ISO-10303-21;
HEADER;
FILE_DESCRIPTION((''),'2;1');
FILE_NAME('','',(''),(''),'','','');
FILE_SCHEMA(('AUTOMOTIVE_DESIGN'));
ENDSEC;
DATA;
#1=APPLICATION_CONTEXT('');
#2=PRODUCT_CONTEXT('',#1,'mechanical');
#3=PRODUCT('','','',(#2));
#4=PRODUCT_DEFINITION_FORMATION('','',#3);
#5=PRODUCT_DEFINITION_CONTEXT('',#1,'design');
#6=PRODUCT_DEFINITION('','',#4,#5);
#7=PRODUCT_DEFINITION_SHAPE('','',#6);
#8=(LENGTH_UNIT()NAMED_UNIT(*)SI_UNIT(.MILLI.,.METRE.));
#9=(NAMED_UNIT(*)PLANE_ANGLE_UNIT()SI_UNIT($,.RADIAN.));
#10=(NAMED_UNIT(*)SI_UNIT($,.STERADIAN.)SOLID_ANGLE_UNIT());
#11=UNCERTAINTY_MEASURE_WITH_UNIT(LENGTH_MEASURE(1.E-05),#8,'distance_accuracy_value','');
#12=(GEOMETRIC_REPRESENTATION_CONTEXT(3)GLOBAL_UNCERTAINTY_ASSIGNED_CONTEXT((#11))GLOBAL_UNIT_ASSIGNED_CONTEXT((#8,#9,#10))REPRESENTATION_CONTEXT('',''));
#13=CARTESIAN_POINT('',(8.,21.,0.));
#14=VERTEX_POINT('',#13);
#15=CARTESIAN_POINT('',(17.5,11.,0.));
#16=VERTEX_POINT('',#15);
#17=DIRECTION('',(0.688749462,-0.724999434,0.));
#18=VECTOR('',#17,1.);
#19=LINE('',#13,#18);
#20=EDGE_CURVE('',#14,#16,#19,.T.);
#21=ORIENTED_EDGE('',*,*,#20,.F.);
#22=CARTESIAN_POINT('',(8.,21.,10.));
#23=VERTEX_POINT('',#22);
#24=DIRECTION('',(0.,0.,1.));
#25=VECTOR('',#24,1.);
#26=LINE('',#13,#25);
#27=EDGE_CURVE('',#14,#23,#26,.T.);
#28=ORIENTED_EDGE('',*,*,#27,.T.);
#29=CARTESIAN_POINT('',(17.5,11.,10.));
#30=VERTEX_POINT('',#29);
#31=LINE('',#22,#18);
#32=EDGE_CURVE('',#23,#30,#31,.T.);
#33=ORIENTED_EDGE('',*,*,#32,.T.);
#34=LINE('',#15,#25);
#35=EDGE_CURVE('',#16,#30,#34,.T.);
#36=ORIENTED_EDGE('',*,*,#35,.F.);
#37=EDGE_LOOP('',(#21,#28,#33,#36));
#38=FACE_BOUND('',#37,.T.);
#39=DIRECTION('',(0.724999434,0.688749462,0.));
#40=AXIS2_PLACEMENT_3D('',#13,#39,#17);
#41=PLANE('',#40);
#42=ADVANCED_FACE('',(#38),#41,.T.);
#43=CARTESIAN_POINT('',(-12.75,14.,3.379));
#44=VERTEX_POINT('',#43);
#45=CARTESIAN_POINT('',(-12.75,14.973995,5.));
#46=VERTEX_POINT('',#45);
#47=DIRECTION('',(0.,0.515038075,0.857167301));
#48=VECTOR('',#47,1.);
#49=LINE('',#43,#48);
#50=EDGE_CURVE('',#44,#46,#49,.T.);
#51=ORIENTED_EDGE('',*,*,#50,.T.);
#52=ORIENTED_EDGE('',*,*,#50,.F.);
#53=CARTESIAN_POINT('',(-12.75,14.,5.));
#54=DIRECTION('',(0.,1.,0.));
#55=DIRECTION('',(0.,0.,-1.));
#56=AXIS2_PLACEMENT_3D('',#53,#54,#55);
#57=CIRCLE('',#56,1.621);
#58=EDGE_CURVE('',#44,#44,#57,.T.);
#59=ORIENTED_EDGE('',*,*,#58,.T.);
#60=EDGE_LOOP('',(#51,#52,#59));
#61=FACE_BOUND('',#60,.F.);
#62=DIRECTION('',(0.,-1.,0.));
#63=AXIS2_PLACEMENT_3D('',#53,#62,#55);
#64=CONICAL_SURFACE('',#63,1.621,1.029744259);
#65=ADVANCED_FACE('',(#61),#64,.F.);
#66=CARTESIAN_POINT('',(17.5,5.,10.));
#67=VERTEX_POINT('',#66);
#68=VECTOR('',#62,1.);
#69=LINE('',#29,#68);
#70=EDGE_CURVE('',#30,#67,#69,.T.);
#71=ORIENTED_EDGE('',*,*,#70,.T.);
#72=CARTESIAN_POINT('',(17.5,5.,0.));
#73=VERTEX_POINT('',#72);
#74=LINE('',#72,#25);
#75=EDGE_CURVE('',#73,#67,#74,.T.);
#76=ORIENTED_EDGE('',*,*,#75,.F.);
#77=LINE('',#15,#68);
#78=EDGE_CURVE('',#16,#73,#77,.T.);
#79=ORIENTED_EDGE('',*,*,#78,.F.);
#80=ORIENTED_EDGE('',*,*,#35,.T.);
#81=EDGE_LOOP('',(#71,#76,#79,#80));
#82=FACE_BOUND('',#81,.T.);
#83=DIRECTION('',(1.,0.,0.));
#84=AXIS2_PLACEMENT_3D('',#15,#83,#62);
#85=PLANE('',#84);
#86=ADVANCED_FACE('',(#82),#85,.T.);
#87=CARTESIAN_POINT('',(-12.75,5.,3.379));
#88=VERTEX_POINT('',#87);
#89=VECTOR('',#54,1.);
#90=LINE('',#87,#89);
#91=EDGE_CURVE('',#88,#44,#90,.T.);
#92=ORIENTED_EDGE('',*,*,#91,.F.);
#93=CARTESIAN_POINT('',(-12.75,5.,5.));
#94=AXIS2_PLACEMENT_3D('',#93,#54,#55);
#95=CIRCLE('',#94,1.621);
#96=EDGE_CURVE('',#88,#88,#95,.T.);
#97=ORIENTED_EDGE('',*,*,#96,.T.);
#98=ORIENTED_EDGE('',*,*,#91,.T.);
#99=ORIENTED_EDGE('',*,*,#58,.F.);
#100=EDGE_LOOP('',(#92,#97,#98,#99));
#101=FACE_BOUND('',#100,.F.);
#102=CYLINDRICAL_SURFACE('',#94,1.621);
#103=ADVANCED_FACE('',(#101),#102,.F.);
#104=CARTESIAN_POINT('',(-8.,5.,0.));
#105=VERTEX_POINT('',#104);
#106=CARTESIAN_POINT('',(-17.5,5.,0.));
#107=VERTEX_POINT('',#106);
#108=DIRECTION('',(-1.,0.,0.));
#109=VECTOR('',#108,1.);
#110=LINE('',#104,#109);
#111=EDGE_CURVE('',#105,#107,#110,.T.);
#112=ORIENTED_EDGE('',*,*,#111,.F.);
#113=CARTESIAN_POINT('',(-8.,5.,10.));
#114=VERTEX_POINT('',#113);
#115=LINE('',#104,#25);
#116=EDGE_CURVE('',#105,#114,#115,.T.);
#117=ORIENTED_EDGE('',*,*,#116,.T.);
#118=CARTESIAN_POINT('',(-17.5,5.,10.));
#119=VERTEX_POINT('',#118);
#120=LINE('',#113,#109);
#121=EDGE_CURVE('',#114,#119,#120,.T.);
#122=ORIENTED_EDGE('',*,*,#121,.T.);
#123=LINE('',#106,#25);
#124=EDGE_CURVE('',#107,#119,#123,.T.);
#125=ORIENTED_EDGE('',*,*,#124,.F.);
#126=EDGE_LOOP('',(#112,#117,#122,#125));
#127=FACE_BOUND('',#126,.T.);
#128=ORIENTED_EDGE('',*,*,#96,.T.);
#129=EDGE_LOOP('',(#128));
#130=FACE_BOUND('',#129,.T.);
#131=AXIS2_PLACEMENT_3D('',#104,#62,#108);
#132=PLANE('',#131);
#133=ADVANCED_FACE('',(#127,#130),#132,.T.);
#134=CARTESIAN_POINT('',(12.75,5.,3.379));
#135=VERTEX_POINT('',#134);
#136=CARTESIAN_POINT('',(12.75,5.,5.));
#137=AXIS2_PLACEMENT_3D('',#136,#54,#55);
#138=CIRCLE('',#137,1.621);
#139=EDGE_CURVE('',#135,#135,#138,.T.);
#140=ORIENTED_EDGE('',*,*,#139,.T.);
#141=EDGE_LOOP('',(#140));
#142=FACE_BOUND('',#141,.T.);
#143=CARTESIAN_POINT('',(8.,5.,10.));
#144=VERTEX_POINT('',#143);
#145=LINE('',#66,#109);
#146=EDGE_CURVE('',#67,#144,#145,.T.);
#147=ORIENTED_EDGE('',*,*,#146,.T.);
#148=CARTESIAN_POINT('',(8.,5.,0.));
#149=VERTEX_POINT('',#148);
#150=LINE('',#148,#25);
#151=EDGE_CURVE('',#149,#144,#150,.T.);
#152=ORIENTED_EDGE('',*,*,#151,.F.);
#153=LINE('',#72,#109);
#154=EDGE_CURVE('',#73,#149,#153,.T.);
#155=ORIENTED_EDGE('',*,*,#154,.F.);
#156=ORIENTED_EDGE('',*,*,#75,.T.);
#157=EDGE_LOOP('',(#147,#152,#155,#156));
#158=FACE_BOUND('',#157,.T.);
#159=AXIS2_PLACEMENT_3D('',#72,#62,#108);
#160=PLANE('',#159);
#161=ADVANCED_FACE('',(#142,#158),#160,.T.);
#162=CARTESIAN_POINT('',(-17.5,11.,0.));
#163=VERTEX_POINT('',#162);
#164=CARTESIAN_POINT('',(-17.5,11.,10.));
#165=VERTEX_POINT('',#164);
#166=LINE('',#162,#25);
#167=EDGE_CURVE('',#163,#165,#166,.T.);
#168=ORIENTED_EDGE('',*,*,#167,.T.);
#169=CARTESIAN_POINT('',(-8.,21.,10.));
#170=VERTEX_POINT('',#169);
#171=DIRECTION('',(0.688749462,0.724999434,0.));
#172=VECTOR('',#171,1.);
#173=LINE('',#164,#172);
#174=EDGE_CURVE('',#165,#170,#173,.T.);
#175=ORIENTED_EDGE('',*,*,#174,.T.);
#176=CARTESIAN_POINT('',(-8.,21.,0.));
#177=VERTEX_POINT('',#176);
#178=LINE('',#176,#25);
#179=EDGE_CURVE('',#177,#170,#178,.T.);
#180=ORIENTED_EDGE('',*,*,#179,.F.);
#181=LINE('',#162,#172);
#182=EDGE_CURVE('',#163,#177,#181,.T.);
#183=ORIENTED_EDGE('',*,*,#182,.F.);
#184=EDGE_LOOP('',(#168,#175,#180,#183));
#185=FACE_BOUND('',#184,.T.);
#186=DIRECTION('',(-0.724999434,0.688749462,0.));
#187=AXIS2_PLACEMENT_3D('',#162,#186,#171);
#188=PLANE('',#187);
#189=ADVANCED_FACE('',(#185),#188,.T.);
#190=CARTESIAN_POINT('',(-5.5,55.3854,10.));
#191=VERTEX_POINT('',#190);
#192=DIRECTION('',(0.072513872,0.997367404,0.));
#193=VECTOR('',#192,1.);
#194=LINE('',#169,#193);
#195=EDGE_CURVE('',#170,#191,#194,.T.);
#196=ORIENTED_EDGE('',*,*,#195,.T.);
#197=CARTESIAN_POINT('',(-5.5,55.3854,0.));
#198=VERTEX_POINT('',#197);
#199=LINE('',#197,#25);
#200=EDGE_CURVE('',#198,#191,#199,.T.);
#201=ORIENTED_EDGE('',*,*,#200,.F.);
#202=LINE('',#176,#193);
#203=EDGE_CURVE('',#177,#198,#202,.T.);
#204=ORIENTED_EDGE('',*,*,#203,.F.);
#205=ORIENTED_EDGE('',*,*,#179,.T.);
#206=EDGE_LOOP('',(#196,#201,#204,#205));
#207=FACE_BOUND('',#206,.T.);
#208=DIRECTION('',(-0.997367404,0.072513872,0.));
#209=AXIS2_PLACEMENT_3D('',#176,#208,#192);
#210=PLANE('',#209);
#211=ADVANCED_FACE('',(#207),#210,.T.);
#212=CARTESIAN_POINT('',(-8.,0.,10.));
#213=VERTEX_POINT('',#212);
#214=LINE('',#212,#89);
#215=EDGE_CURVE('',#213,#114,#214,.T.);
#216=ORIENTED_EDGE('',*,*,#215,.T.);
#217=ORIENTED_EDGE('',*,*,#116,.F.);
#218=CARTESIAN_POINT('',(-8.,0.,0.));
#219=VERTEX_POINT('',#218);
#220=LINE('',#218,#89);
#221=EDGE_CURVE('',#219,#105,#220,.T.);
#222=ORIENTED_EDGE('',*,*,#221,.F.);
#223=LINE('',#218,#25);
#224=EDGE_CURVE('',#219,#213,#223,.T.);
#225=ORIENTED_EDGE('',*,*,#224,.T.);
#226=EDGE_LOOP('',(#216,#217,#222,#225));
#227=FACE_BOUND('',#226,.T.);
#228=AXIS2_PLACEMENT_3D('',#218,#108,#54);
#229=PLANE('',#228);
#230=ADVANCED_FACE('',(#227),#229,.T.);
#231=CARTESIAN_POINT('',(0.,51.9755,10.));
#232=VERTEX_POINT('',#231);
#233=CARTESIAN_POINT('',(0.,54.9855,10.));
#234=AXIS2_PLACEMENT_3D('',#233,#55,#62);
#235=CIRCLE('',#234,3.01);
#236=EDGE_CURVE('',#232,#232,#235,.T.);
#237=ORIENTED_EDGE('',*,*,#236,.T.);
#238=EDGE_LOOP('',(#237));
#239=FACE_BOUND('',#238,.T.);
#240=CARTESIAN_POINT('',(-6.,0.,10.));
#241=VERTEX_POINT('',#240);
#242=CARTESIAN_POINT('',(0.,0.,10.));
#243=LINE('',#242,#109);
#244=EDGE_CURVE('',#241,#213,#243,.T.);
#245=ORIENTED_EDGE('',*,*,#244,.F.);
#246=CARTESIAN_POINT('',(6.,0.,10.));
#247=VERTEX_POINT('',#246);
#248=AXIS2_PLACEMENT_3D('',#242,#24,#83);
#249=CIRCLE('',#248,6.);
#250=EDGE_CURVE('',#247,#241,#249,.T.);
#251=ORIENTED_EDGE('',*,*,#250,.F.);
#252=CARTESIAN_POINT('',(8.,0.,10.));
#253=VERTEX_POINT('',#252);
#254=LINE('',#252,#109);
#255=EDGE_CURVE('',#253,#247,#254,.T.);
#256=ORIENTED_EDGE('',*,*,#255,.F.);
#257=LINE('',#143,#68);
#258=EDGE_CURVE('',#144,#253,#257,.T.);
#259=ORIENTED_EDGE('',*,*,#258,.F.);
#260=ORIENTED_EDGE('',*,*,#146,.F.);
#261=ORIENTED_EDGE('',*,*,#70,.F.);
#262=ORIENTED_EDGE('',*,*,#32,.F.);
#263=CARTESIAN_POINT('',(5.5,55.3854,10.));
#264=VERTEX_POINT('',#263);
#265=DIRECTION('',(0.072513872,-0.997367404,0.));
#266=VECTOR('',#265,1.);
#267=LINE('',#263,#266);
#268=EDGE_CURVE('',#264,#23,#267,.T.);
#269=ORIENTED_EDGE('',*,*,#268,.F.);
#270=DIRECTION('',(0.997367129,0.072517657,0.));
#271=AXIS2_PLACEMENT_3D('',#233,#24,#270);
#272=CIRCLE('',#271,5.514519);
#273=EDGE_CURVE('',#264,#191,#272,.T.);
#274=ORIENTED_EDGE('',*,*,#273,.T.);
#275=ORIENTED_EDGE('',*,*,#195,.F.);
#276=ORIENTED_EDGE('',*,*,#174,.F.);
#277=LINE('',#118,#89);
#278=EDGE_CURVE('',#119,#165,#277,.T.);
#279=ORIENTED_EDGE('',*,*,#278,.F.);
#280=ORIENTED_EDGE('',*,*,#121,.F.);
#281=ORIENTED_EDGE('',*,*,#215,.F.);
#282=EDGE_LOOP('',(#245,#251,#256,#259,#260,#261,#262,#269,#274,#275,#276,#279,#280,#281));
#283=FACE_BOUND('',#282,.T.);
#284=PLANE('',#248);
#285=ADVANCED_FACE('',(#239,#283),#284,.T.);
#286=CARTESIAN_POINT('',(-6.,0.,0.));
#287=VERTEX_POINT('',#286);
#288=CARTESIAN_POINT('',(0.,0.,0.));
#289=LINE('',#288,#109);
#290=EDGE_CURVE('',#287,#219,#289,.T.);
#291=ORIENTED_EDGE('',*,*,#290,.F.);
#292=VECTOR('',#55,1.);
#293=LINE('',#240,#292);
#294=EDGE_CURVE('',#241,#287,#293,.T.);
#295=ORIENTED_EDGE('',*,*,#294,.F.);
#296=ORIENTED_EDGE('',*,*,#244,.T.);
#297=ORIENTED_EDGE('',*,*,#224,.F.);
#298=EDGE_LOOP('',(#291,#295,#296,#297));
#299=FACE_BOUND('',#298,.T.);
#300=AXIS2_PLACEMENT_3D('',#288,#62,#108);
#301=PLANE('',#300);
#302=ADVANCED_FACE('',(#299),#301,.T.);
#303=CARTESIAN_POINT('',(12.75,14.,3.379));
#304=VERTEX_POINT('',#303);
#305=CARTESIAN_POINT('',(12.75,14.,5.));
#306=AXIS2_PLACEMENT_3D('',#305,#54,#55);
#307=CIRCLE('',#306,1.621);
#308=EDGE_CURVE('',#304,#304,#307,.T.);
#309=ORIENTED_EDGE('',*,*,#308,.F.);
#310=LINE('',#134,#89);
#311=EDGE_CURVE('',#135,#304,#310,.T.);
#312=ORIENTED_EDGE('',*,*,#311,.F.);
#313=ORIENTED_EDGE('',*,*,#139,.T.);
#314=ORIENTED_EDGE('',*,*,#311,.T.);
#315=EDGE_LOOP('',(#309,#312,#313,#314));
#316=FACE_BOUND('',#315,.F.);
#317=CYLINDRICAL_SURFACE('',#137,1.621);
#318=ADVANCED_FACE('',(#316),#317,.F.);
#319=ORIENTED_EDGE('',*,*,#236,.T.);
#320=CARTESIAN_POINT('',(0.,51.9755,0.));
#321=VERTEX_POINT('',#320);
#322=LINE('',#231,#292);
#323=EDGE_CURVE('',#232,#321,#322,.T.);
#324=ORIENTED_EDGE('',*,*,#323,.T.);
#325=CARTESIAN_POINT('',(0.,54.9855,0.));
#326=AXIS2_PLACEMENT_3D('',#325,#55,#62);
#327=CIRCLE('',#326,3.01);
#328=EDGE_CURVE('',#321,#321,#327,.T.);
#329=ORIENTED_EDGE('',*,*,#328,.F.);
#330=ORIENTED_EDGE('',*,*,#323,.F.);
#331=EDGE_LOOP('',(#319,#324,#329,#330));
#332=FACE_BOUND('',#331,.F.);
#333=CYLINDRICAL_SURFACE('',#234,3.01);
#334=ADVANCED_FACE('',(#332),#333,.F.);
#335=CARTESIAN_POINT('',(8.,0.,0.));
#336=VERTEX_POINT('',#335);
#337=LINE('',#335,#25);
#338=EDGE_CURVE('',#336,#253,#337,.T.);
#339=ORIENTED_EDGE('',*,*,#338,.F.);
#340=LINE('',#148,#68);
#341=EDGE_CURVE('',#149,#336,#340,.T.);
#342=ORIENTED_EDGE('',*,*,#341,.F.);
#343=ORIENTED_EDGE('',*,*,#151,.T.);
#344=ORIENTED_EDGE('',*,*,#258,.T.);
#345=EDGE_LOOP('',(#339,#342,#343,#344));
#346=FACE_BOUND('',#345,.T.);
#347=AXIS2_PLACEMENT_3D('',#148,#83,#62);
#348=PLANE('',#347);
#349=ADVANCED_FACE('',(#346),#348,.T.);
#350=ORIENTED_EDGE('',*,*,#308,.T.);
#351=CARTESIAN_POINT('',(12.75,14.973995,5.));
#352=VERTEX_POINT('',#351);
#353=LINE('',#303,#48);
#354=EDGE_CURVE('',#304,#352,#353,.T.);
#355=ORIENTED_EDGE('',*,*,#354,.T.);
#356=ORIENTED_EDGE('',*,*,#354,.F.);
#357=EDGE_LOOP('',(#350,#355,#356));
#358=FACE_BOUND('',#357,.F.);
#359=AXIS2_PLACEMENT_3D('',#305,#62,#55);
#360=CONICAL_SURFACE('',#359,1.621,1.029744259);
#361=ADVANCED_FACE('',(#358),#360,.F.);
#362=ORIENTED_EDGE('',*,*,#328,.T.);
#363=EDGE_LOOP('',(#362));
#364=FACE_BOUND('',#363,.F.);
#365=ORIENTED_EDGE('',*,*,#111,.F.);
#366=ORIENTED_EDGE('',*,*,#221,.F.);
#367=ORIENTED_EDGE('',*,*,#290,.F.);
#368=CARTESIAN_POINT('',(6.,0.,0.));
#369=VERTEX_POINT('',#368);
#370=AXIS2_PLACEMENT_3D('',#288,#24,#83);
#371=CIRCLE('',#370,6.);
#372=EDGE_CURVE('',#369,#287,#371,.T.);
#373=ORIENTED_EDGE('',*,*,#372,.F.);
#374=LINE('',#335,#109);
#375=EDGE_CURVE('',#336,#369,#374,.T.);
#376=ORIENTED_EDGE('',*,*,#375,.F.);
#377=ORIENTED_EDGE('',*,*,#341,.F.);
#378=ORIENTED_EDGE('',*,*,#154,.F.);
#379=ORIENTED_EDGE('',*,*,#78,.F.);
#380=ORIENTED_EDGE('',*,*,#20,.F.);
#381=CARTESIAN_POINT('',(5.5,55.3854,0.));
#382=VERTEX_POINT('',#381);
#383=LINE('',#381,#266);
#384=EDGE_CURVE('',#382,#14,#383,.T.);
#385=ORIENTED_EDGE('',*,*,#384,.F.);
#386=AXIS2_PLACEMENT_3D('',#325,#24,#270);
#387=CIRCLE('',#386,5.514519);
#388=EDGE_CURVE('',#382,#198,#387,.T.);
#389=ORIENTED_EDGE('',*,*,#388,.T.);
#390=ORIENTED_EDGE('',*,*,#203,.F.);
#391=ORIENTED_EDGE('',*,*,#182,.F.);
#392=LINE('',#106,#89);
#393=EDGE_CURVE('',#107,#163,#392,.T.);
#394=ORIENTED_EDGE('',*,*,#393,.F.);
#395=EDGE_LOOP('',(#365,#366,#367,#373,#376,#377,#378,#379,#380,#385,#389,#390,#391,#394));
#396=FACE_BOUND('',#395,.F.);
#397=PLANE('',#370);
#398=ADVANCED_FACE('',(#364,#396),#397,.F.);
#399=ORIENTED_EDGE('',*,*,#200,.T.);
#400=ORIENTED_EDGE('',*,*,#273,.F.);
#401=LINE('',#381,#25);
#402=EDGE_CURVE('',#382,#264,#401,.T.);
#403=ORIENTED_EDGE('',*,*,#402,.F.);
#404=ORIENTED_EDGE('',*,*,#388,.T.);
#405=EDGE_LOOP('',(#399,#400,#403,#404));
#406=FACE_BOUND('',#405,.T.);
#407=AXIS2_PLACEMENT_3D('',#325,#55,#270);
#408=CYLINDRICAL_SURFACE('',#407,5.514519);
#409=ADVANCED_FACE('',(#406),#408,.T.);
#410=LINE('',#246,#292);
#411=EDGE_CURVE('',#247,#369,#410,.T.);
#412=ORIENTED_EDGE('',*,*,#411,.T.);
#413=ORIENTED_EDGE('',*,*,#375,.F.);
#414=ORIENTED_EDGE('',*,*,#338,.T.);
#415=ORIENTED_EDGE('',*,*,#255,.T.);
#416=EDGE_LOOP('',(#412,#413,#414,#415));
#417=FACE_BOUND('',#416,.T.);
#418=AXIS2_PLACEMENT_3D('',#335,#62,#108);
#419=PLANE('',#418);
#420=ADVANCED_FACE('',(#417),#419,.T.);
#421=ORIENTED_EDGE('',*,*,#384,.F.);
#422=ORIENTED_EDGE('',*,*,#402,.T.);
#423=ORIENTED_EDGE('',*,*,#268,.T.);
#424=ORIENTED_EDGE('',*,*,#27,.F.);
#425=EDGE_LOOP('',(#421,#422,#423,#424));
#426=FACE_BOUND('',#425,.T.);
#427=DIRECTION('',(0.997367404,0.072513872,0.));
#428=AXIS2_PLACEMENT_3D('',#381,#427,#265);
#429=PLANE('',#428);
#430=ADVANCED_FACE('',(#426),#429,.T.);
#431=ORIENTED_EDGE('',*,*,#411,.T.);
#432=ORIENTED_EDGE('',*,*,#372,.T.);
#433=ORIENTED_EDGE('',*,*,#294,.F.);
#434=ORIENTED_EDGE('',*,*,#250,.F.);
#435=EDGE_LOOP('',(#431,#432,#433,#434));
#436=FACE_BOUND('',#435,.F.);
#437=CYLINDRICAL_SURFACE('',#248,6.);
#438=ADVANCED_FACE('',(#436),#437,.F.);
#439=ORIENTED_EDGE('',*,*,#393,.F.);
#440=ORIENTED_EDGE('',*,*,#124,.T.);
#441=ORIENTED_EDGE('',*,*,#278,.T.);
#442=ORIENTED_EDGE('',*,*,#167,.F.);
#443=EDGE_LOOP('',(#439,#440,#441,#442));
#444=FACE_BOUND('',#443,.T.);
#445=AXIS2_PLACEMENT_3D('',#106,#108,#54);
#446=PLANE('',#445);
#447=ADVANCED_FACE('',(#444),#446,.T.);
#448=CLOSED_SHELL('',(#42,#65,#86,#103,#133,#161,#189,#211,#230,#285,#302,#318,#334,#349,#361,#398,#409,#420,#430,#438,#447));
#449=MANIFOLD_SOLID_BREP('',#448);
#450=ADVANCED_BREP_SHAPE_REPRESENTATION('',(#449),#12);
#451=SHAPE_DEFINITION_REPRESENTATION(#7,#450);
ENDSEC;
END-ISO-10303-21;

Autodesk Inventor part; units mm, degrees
ref_plane "YZ Plane" through (0, 0, 0) normal (1, 0, 0) x (0, 1, 0)
ref_plane "XZ Plane" through (0, 0, 0) normal (0, 1, 0) x (-1, 0, 0)
ref_plane "XY Plane" through (0, 0, 0) normal (0, 0, 1) x (1, 0, 0)
sketch "Skizze1" plane through (0, 0, 0) normal (0, 0, 1) x (1, 0, 0)
  line L0 (0, 0) -> (0, 60.5) construction
  line L1 (0, 0) -> (-8, 0)
  line L2 (-8, 0) -> (-8, 5)
  line L3 (-8, 5) -> (-17.5, 5)
  line L4 (-17.5, 5) -> (-17.5, 11)
  line L5 (-17.5, 11) -> (-8, 21)
  line L6 (-8, 21) -> (-5.5, 55.3854)
  arc A0 (5.5, 55.3854) -> (-5.5, 55.3854) centre (0, 54.9855) ccw
  line L7 (5.5, 55.3854) -> (8, 21)
  line L8 (8, 21) -> (17.5, 11)
  line L9 (17.5, 11) -> (17.5, 5)
  line L10 (17.5, 5) -> (8, 5)
  line L11 (8, 5) -> (8, 0)
  line L12 (8, 0) -> (0, 0)
  dimension "d6" = 60.5
  dimension "d7" = 16
  dimension "d8" = 5
  dimension "d9" = 11
  dimension "d10" = 35
  dimension "d11" = 11
  dimension "d12" = 21
extrude "Extrusion1" add sketch "Skizze1" along normal blind 10
sketch "Skizze2" plane through (0, 0, 10) normal (0, 0, 1) x (1, 0, 0)
  line L0 (-8, 0) -> (8, 0) projected
  arc A0 (6, 0) -> (-6, 0) centre (0, 0) ccw
  point P0 (0, 0)
  dimension "d15" = 12
extrude "Extrusion2" cut sketch "Skizze2" against normal blind 10
sketch "Skizze3" plane through (-17.5, 5, 0) normal (0, -1, 0) x (1, 0, 0)
  line L0 (17.5, 0) -> (17.5, 10) construction
  line L1 (11.5, 10) -> (23.5, 10) projected
  line L2 (0, 0) -> (0, 10) projected
  point P0 (4.75, 5)
  point P1 (30.25, 5)
  point P2 (0, 5)
  dimension "d18" = 25.5
hole "Bohrung1" at (-12.75, 5, 5) at (12.75, 5, 5) direction (0, 1, 0) diameter 3.242 depth 9 tip angle 118 thread size "M4x0.7" class "6H" standard "ISO Metric profile"
sketch "Skizze4" plane through (0, 0, 10) normal (0, 0, 1) x (1, 0, 0)
  arc A0 (5.5, 55.3854) -> (-5.5, 55.3854) centre (0, 54.9855) ccw projected
  point P0 (0, 0)
hole "Bohrung2" at (0, 54.9855, 10) direction (0, 0, -1) diameter 6.02 end through all
properties part number "Pleuel_oberteil" material "Stahl, galvanisiert"
